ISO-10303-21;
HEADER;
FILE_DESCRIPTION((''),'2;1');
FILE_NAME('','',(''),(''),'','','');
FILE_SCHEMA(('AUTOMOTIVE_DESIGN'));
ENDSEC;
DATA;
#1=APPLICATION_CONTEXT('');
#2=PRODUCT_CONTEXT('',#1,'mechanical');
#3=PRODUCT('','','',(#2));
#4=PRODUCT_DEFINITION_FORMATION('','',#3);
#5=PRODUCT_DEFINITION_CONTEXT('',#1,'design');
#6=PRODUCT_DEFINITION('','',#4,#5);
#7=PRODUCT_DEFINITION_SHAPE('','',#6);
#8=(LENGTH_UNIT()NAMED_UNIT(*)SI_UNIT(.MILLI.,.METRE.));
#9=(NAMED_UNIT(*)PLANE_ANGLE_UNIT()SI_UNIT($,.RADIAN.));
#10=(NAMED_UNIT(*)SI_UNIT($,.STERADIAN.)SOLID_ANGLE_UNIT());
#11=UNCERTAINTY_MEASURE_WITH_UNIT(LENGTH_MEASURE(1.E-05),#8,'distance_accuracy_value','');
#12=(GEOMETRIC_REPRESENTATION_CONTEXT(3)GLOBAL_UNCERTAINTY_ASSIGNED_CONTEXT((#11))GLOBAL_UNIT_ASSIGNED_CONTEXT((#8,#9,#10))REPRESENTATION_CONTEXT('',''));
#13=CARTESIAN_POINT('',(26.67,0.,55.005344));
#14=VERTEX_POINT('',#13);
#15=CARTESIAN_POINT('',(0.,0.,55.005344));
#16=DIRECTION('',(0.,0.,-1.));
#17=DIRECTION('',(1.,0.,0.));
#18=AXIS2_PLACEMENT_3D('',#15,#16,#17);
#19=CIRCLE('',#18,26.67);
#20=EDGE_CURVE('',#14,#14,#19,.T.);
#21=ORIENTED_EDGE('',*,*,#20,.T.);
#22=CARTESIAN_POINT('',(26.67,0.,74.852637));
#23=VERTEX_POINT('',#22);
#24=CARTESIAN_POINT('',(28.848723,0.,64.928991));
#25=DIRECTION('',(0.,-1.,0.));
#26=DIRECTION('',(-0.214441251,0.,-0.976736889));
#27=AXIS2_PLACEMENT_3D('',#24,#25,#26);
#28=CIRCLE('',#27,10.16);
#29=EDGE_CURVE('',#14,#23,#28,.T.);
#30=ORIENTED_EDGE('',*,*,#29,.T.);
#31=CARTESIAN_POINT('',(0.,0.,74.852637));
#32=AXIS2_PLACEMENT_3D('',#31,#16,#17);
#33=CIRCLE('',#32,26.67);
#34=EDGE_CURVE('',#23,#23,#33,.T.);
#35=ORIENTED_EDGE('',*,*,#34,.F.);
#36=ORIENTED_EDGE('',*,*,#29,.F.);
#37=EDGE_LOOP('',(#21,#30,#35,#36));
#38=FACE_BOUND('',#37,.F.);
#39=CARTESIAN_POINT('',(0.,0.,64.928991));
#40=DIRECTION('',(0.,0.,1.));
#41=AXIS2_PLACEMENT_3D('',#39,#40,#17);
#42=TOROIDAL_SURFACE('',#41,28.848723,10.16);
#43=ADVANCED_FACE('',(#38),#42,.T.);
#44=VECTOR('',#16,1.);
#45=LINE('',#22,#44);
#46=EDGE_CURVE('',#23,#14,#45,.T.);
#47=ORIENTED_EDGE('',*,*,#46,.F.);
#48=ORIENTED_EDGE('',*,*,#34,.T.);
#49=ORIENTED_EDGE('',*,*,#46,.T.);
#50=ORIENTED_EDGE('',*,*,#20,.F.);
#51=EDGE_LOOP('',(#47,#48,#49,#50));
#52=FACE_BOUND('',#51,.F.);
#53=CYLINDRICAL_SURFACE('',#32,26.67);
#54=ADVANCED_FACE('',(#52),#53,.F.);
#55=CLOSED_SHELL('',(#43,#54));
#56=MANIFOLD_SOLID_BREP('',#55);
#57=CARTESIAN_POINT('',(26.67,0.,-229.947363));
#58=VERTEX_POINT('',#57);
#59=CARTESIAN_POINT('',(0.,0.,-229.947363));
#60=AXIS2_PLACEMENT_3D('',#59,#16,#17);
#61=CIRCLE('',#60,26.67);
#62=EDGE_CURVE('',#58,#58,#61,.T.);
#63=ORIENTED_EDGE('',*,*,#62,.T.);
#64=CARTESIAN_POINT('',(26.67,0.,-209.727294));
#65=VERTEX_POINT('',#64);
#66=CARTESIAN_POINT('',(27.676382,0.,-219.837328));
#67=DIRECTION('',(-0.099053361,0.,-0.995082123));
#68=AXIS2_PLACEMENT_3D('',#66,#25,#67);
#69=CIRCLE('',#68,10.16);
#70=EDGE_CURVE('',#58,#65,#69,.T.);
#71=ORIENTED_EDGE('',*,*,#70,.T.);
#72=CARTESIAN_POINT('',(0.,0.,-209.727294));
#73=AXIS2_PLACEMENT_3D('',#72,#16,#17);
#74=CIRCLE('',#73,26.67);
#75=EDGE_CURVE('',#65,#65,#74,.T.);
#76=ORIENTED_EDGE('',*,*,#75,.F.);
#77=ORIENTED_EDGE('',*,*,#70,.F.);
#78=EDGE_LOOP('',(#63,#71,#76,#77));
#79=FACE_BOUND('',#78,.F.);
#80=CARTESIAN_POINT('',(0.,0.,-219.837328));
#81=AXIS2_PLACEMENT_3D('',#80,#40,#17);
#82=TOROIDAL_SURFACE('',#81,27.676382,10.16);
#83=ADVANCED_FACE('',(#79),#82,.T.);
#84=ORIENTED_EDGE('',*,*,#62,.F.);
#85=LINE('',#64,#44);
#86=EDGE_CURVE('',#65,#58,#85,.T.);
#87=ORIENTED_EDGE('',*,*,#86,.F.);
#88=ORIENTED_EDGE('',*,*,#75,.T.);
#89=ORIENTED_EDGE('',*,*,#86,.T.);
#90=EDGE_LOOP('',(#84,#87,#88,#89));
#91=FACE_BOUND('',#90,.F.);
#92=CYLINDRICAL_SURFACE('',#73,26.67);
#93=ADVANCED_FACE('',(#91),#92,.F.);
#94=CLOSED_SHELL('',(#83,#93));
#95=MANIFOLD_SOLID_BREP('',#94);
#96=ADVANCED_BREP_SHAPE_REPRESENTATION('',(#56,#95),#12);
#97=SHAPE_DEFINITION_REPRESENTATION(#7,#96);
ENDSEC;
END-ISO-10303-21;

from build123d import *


# Not quite as in the source:
# - the program builds the solid bodies; features that only make, move or delete a surface that nothing else refers to are left out


with BuildPart() as f2:
    # F0 (on Front) → F2 (revolve)
    with BuildSketch(Plane.XZ):
        with BuildLine():
            ThreePointArc((26.67, 55.0053439078), (39.0087231115, 64.9289906974), (26.67, 74.8526374869))
            Line((26.67, 74.8526374869), (26.67, 55.0053439078))
        make_face()
    revolve(axis=Axis((0, 0, 0), (0, 0, -1)))


with BuildPart() as f2b:
    # F0 (on Front) → F2, piece 2 (revolve)
    with BuildSketch(Plane.XZ):
        with BuildLine():
            ThreePointArc((26.67, -229.9473625131), (37.836382144, -219.8373281422), (26.67, -209.7272937714))
            Line((26.67, -209.7272937714), (26.67, -229.9473625131))
        make_face()
    revolve(axis=Axis((0, 0, 0), (0, 0, -1)))


solid = Compound([f2.part, f2b.part])
